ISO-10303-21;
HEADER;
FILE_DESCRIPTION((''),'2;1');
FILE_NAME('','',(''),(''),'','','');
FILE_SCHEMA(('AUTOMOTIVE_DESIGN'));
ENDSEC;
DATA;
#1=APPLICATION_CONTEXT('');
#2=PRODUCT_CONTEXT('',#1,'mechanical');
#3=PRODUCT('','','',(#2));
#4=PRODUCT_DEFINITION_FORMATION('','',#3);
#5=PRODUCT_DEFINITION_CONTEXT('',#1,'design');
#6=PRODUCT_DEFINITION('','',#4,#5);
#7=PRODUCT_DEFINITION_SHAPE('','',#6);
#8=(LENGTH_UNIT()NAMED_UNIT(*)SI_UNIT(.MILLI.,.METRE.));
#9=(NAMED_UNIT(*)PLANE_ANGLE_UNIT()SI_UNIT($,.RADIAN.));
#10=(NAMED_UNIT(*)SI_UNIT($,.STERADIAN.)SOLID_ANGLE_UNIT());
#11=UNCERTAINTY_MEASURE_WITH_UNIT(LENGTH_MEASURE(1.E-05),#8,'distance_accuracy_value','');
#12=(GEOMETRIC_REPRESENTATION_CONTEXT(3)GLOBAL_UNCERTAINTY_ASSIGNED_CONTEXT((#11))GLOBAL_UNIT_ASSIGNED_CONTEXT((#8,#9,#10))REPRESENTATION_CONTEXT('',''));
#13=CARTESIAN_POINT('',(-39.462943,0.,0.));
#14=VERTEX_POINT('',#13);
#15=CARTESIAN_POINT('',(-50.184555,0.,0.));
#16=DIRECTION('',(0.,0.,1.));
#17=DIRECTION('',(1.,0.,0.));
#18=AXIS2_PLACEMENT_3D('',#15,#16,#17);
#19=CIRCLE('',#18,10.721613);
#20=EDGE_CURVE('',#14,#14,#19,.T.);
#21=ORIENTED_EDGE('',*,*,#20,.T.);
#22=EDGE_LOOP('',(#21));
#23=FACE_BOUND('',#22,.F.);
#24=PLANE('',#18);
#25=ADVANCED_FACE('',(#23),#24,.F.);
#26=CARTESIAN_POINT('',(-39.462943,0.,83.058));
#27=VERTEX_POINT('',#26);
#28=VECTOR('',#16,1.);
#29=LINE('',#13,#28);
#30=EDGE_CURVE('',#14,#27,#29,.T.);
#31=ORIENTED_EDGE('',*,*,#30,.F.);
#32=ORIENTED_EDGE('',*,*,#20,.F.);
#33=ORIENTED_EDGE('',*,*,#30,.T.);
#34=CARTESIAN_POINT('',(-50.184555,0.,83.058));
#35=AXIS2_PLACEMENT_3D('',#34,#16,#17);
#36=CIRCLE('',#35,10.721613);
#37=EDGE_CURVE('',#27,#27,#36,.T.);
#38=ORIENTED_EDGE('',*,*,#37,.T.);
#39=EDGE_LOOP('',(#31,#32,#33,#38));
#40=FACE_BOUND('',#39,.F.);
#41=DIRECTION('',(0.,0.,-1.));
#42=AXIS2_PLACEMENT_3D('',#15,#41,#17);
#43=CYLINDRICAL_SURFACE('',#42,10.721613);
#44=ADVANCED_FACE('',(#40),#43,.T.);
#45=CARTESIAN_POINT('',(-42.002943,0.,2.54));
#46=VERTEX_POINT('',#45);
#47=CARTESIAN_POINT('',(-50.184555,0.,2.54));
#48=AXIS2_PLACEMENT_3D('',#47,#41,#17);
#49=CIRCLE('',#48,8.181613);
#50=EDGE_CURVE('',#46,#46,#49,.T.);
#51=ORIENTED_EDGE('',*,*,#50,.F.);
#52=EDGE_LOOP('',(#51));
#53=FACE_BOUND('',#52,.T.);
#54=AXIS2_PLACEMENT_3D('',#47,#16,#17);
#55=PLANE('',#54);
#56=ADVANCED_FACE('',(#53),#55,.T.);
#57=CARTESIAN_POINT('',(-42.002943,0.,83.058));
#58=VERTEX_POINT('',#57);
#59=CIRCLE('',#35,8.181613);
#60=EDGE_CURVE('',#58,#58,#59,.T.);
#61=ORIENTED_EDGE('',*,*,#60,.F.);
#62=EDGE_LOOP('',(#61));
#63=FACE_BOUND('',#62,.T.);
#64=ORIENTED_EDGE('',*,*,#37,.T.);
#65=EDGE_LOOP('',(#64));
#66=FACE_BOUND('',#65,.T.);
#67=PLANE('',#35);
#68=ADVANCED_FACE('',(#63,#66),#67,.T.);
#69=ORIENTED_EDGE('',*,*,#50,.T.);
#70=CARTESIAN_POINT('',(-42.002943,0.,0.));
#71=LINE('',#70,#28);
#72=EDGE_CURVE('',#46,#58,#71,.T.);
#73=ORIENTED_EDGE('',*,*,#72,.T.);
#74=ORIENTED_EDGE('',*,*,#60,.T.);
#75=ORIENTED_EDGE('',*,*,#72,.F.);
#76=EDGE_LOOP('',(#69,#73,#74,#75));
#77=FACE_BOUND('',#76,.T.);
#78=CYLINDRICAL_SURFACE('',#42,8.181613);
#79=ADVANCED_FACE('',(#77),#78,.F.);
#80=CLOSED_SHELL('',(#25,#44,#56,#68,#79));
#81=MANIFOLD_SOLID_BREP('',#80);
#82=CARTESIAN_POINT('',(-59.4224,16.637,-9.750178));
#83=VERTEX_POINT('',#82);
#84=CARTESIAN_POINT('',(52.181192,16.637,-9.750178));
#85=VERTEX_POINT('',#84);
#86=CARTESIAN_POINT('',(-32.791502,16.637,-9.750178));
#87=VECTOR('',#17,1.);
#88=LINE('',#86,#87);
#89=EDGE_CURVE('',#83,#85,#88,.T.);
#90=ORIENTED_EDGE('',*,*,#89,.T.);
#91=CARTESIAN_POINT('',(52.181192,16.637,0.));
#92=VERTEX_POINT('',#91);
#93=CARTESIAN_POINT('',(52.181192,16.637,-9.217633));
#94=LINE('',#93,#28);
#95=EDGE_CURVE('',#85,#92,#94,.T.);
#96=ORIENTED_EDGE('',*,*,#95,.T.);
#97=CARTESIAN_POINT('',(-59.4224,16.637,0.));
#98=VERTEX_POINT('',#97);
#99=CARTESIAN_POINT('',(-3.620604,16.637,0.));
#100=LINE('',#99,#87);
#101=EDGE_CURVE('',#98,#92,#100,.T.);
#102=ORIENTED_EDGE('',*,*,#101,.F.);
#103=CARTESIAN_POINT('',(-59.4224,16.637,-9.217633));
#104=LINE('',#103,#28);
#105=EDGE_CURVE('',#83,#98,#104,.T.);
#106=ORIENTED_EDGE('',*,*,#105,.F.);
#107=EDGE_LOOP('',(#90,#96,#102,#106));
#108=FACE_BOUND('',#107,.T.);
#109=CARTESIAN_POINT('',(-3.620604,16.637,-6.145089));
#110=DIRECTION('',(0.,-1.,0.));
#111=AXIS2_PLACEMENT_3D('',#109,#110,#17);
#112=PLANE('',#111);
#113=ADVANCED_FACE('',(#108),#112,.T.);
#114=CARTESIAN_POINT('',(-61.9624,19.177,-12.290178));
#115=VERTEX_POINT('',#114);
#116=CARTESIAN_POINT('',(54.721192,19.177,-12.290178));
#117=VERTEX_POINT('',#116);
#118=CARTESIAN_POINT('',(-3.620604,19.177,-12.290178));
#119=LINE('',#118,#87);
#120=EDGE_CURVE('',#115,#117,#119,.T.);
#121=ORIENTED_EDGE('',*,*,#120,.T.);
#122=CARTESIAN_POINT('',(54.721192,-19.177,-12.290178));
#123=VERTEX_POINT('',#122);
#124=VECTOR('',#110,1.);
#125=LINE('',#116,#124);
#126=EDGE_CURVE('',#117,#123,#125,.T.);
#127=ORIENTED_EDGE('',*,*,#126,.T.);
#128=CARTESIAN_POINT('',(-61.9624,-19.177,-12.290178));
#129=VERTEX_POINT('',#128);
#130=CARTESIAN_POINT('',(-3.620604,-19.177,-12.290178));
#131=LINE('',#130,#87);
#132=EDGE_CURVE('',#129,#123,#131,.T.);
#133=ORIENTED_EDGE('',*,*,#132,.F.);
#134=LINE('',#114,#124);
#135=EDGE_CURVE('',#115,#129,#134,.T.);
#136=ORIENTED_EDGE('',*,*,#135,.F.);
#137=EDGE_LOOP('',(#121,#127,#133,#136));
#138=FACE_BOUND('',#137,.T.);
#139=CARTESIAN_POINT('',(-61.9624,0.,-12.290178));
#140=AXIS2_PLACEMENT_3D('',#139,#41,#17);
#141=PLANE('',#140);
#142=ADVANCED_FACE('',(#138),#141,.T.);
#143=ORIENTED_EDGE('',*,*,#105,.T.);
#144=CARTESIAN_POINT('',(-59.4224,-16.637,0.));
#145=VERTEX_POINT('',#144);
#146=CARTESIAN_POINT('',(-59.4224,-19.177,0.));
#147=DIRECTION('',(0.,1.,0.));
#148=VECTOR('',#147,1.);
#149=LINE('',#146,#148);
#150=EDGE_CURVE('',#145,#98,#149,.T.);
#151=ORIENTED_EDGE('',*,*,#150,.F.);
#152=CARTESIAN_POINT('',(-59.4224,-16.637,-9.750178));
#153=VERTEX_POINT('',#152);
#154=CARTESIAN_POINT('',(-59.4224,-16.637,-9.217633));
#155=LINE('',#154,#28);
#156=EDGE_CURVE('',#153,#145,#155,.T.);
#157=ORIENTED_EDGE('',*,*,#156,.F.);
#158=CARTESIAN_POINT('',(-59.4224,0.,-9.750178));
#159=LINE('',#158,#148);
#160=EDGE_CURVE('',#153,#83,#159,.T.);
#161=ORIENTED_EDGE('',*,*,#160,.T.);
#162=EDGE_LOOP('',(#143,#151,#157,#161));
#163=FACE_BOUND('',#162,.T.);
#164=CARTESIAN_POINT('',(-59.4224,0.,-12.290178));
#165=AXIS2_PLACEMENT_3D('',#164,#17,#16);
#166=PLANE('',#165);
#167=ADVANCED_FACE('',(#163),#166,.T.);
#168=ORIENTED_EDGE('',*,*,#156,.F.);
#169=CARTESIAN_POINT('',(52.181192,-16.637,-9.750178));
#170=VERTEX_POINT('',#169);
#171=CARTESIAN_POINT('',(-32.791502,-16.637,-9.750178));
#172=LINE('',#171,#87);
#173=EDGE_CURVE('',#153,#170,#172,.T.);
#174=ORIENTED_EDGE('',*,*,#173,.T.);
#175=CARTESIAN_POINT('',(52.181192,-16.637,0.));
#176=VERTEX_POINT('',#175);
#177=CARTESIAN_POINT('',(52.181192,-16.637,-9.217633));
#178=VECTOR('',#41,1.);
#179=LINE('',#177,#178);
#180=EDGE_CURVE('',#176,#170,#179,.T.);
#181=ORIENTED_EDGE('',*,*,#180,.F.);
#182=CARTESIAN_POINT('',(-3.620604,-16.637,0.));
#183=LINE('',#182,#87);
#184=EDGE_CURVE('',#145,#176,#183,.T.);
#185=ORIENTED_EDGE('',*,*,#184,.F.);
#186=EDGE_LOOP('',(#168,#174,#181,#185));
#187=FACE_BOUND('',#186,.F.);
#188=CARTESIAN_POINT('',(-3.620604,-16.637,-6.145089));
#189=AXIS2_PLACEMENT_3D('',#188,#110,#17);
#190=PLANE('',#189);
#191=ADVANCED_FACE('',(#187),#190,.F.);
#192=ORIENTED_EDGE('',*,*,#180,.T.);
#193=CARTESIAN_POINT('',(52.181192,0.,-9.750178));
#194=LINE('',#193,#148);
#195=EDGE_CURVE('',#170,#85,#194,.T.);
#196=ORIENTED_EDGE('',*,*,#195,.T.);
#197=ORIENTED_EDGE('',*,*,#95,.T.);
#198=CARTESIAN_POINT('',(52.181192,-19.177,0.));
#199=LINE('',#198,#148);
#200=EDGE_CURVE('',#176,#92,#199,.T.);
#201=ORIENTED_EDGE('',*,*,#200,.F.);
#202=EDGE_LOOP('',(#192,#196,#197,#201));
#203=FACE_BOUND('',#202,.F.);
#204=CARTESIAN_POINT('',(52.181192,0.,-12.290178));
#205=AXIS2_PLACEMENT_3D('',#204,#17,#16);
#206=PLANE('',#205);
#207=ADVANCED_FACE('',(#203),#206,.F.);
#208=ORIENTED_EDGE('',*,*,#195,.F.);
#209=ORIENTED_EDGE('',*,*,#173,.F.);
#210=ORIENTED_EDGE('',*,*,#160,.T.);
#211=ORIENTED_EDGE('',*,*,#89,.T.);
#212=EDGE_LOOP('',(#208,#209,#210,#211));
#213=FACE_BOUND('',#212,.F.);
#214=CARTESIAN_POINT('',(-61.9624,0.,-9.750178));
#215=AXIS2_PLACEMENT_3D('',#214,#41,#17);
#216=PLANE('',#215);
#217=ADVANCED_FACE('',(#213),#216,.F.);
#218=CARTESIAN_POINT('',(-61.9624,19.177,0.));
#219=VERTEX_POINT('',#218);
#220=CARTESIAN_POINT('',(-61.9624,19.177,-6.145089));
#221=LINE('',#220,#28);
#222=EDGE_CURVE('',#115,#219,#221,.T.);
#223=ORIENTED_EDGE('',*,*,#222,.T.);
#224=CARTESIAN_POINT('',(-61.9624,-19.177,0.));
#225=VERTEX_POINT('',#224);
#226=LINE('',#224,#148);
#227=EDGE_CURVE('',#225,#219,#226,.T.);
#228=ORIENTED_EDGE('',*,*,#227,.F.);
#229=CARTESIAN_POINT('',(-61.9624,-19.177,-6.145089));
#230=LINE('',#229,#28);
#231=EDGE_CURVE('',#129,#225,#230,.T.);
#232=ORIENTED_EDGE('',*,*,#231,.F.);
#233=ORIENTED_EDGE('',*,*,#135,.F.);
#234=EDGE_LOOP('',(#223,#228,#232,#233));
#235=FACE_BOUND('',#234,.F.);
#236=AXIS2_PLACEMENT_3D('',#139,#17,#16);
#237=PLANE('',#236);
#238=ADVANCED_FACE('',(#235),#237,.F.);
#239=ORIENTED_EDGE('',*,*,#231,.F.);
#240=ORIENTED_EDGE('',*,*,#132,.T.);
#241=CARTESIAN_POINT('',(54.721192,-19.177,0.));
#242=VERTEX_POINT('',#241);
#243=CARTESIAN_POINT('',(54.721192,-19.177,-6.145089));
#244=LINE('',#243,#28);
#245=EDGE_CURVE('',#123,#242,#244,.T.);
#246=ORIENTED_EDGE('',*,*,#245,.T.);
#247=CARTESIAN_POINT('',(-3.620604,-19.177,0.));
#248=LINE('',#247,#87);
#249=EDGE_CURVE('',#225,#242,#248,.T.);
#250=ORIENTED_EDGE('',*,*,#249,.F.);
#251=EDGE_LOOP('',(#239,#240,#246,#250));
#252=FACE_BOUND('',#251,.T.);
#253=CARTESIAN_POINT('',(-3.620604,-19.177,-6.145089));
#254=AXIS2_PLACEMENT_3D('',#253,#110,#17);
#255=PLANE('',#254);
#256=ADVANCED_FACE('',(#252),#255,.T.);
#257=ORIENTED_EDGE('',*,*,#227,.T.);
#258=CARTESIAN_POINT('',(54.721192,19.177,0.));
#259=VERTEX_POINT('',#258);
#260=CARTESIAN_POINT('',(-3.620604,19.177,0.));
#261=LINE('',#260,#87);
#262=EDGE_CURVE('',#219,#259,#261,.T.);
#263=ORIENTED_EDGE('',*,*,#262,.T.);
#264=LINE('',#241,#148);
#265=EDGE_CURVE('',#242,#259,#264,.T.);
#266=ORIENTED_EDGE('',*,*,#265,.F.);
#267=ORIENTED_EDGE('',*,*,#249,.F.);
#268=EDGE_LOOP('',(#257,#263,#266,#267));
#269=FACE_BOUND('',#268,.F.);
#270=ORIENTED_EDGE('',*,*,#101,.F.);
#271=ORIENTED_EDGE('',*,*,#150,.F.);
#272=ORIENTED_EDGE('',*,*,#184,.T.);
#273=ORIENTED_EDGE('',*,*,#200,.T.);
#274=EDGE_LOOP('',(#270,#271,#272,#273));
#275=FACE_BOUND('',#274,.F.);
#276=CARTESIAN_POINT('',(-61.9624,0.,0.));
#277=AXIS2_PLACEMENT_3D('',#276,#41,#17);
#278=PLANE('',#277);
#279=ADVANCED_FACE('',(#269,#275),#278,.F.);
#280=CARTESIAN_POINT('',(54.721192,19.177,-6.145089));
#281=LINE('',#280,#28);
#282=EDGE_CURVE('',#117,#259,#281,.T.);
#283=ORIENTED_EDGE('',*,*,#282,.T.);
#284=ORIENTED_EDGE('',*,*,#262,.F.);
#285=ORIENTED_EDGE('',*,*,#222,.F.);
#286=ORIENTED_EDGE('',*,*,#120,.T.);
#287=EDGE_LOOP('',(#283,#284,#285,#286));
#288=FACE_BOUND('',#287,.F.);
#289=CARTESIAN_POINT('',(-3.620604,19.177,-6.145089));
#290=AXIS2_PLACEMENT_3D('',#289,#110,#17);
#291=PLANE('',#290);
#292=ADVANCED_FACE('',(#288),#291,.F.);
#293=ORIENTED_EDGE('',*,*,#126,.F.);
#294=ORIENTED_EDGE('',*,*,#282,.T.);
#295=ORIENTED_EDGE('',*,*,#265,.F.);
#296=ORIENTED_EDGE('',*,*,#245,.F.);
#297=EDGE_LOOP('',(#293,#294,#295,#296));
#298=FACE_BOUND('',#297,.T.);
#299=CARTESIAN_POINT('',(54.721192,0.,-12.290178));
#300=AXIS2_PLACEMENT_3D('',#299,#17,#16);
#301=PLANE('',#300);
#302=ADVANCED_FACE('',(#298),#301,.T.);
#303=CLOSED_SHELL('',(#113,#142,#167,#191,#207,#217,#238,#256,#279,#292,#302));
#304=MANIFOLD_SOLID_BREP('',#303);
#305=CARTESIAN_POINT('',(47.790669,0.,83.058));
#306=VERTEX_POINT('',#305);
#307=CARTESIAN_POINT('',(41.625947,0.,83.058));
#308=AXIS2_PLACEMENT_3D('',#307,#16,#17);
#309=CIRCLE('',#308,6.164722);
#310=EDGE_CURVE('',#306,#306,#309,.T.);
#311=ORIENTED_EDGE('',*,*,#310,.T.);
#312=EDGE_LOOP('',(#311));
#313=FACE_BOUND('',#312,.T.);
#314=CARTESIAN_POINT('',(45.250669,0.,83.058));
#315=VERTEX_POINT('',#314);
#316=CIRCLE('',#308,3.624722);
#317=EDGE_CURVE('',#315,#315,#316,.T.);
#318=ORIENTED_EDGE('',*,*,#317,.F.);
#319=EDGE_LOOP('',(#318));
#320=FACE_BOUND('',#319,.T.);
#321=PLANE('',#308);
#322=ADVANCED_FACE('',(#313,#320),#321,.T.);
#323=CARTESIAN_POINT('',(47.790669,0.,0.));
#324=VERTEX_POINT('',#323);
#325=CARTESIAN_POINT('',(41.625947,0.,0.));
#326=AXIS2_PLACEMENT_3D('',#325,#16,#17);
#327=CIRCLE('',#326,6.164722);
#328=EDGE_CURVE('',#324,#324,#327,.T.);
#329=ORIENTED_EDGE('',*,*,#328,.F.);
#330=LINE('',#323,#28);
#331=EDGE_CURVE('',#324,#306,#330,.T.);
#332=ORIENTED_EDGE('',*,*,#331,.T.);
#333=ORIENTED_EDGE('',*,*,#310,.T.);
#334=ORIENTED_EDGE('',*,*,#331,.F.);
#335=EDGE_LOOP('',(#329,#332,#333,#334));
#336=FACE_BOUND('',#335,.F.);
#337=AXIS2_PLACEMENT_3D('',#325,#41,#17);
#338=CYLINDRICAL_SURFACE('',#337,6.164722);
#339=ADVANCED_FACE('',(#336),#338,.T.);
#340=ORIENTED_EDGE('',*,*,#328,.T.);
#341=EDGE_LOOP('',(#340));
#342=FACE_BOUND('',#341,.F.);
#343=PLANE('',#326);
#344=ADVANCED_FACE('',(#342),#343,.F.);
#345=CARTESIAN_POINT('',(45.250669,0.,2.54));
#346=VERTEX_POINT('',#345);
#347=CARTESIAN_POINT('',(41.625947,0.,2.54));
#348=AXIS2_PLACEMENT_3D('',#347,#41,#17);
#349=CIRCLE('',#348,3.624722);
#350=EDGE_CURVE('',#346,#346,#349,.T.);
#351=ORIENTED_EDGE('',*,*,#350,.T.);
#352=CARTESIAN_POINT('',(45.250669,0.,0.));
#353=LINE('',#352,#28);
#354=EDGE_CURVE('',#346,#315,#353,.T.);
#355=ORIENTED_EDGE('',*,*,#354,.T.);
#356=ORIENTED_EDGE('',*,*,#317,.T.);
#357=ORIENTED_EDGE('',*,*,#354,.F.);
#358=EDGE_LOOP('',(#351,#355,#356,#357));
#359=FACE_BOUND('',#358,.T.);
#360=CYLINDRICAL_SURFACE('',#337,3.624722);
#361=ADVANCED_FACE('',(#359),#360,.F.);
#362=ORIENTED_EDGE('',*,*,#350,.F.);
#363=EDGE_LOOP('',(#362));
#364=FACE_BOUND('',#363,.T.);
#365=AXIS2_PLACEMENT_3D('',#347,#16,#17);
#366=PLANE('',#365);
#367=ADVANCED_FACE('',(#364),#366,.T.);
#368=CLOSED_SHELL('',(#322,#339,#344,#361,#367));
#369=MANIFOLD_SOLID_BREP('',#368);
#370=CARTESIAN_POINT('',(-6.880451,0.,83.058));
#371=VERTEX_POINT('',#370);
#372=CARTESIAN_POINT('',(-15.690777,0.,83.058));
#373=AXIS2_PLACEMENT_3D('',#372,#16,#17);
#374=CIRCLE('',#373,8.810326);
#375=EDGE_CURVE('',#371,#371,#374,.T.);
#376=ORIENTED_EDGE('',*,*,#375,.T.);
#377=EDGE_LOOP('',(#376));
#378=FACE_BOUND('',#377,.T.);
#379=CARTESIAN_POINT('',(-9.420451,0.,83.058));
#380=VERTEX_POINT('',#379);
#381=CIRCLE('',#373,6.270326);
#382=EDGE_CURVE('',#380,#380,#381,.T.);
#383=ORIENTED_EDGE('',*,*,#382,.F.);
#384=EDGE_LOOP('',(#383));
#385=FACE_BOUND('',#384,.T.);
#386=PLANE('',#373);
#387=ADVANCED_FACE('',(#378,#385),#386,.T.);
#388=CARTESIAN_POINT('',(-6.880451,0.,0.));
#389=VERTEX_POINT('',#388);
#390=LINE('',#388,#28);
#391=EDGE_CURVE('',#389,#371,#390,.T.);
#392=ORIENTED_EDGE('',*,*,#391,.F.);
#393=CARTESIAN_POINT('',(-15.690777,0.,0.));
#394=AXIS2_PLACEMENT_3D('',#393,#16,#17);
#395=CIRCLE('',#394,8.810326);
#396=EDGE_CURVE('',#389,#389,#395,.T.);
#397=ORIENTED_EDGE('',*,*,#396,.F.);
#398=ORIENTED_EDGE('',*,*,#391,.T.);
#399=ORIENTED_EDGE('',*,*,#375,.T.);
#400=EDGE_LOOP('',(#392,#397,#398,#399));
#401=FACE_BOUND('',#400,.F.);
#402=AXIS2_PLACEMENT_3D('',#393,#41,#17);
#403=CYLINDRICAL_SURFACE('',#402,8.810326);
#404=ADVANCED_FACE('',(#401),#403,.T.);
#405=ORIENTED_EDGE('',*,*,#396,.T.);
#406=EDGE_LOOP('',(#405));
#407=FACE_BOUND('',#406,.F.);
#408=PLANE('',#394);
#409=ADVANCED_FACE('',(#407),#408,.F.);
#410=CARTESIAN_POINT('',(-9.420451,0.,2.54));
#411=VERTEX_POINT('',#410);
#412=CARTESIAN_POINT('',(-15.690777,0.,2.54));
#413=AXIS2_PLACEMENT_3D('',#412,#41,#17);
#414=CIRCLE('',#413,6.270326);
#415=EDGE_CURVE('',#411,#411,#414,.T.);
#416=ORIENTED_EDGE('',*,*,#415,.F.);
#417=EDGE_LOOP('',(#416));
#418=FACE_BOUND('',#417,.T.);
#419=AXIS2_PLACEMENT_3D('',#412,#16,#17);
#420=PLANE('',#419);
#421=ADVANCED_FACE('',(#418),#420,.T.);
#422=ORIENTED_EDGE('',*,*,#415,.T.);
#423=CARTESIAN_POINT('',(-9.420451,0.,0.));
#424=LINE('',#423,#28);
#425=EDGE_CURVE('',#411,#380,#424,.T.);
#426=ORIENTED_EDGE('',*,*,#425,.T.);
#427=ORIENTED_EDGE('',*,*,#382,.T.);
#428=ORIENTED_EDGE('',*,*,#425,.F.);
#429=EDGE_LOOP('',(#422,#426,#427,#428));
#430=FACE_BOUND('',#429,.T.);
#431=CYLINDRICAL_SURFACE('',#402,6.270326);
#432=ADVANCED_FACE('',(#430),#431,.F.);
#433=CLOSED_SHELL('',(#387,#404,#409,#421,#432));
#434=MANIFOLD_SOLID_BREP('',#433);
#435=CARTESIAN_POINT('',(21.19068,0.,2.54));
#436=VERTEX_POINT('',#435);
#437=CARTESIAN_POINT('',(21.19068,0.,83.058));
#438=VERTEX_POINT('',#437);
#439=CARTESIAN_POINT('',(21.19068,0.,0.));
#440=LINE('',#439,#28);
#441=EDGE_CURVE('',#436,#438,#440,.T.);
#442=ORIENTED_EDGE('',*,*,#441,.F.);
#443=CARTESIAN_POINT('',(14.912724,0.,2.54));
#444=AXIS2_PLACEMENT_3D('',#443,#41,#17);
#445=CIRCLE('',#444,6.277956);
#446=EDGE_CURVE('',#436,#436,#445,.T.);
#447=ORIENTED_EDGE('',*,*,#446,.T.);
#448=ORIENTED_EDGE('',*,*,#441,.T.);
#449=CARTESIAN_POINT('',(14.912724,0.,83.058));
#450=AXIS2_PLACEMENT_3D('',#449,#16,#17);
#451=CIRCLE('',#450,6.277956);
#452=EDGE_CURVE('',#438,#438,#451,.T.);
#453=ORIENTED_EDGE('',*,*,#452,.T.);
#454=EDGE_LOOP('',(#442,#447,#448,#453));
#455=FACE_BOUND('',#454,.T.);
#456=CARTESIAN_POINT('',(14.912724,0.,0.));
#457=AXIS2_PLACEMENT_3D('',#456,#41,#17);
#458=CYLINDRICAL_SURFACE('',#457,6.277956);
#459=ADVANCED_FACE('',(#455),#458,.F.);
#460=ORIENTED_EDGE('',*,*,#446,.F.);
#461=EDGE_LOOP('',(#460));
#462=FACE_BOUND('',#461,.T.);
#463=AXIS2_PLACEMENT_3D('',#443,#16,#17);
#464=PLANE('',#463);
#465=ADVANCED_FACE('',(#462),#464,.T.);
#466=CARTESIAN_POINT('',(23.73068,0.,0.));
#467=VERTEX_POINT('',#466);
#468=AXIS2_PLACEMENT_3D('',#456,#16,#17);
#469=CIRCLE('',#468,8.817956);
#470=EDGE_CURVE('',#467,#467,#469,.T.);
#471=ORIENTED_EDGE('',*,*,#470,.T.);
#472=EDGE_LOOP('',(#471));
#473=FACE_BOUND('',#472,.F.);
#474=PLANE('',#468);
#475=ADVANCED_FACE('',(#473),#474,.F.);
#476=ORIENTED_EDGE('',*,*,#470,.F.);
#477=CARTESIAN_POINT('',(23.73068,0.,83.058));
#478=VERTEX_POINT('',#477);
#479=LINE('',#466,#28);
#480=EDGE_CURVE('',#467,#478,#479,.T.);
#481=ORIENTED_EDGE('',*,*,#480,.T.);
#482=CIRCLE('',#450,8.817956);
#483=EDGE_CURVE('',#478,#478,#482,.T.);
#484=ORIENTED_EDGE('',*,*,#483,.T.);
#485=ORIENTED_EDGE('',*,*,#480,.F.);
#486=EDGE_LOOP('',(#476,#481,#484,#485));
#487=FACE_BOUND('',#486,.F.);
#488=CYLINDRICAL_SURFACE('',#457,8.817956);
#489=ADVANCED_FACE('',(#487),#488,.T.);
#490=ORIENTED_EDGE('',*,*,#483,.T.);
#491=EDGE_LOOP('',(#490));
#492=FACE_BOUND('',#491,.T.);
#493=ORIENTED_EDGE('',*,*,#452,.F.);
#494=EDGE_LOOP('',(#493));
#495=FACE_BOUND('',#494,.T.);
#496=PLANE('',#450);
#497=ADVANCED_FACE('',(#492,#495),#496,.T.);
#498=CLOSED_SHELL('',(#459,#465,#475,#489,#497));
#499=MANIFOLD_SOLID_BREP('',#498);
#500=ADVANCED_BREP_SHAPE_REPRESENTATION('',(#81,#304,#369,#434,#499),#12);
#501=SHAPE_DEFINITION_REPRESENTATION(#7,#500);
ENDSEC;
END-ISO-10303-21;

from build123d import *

# Parameters (mm, degrees)
F0_R     = 10.721612753
F1_DEPTH = 83.058
F0_R_2   = 8.8103259694
F0_R_3   = 8.8179558516
F0_R_4   = 6.164722253
F2_W     = 116.6835911572
F2_H     = 12.2901778668
F3_DEPTH = 19.177
F4_T     = -2.54
F4_2_T   = -2.54
F4_3_T   = -2.54
F4_4_T   = -2.54
F5_T     = -2.54


# Not quite as in the source:
# - a feature names something its author has since deleted; it is built from what else it names


with BuildPart() as f1:
    # F0 (on Top) → F1 (new body)
    with BuildSketch(Plane.XY):
        with Locations((-50.1845553517, 0)):
            Circle(F0_R)
    extrude(amount=F1_DEPTH)

    # F4
    f4_openings = [f1.faces().sort_by_distance(p)[0] for p in [
        (-50.184555, 0, 83.058),
    ]]
    offset(amount=F4_T, openings=f4_openings)


with BuildPart() as f1b:
    # F0 (on Top) → F1, piece 2 (new body)
    with BuildSketch(Plane.XY):
        with Locations((-15.6907774508, 0)):
            Circle(F0_R_2)
    extrude(amount=F1_DEPTH)

    # F4#4
    f4_4_openings = [f1b.faces().sort_by_distance(p)[0] for p in [
        (-15.690777, 0, 83.058),
    ]]
    offset(amount=F4_4_T, openings=f4_4_openings)


with BuildPart() as f1c:
    # F0 (on Top) → F1, piece 3 (new body)
    with BuildSketch(Plane.XY):
        with Locations((14.9127244949, 0)):
            Circle(F0_R_3)
    extrude(amount=F1_DEPTH)

    # F4#2
    f4_2_openings = [f1c.faces().sort_by_distance(p)[0] for p in [
        (14.912724, 0, 83.058),
    ]]
    offset(amount=F4_2_T, openings=f4_2_openings)


with BuildPart() as f1d:
    # F0 (on Top) → F1, piece 4 (new body)
    with BuildSketch(Plane.XY):
        with Locations((41.6259467602, 0)):
            Circle(F0_R_4)
    extrude(amount=F1_DEPTH)

    # F4#3
    f4_3_openings = [f1d.faces().sort_by_distance(p)[0] for p in [
        (41.625947, 0, 83.058),
    ]]
    offset(amount=F4_3_T, openings=f4_3_openings)


with BuildPart() as f3:
    # F2 (on Front) → F3 (new body, symmetric)
    with BuildSketch(Plane.XZ):
        with Locations((-3.6206040531, -6.1450889334)):
            Rectangle(F2_W, F2_H)
    extrude(amount=F3_DEPTH, both=True)

    # F5
    f5_openings = [f3.faces().sort_by_distance(p)[0] for p in [
        (-3.620604, 0, 0),
    ]]
    offset(amount=F5_T, openings=f5_openings)


solid = Compound([f1.part, f1b.part, f1c.part, f1d.part, f3.part])
